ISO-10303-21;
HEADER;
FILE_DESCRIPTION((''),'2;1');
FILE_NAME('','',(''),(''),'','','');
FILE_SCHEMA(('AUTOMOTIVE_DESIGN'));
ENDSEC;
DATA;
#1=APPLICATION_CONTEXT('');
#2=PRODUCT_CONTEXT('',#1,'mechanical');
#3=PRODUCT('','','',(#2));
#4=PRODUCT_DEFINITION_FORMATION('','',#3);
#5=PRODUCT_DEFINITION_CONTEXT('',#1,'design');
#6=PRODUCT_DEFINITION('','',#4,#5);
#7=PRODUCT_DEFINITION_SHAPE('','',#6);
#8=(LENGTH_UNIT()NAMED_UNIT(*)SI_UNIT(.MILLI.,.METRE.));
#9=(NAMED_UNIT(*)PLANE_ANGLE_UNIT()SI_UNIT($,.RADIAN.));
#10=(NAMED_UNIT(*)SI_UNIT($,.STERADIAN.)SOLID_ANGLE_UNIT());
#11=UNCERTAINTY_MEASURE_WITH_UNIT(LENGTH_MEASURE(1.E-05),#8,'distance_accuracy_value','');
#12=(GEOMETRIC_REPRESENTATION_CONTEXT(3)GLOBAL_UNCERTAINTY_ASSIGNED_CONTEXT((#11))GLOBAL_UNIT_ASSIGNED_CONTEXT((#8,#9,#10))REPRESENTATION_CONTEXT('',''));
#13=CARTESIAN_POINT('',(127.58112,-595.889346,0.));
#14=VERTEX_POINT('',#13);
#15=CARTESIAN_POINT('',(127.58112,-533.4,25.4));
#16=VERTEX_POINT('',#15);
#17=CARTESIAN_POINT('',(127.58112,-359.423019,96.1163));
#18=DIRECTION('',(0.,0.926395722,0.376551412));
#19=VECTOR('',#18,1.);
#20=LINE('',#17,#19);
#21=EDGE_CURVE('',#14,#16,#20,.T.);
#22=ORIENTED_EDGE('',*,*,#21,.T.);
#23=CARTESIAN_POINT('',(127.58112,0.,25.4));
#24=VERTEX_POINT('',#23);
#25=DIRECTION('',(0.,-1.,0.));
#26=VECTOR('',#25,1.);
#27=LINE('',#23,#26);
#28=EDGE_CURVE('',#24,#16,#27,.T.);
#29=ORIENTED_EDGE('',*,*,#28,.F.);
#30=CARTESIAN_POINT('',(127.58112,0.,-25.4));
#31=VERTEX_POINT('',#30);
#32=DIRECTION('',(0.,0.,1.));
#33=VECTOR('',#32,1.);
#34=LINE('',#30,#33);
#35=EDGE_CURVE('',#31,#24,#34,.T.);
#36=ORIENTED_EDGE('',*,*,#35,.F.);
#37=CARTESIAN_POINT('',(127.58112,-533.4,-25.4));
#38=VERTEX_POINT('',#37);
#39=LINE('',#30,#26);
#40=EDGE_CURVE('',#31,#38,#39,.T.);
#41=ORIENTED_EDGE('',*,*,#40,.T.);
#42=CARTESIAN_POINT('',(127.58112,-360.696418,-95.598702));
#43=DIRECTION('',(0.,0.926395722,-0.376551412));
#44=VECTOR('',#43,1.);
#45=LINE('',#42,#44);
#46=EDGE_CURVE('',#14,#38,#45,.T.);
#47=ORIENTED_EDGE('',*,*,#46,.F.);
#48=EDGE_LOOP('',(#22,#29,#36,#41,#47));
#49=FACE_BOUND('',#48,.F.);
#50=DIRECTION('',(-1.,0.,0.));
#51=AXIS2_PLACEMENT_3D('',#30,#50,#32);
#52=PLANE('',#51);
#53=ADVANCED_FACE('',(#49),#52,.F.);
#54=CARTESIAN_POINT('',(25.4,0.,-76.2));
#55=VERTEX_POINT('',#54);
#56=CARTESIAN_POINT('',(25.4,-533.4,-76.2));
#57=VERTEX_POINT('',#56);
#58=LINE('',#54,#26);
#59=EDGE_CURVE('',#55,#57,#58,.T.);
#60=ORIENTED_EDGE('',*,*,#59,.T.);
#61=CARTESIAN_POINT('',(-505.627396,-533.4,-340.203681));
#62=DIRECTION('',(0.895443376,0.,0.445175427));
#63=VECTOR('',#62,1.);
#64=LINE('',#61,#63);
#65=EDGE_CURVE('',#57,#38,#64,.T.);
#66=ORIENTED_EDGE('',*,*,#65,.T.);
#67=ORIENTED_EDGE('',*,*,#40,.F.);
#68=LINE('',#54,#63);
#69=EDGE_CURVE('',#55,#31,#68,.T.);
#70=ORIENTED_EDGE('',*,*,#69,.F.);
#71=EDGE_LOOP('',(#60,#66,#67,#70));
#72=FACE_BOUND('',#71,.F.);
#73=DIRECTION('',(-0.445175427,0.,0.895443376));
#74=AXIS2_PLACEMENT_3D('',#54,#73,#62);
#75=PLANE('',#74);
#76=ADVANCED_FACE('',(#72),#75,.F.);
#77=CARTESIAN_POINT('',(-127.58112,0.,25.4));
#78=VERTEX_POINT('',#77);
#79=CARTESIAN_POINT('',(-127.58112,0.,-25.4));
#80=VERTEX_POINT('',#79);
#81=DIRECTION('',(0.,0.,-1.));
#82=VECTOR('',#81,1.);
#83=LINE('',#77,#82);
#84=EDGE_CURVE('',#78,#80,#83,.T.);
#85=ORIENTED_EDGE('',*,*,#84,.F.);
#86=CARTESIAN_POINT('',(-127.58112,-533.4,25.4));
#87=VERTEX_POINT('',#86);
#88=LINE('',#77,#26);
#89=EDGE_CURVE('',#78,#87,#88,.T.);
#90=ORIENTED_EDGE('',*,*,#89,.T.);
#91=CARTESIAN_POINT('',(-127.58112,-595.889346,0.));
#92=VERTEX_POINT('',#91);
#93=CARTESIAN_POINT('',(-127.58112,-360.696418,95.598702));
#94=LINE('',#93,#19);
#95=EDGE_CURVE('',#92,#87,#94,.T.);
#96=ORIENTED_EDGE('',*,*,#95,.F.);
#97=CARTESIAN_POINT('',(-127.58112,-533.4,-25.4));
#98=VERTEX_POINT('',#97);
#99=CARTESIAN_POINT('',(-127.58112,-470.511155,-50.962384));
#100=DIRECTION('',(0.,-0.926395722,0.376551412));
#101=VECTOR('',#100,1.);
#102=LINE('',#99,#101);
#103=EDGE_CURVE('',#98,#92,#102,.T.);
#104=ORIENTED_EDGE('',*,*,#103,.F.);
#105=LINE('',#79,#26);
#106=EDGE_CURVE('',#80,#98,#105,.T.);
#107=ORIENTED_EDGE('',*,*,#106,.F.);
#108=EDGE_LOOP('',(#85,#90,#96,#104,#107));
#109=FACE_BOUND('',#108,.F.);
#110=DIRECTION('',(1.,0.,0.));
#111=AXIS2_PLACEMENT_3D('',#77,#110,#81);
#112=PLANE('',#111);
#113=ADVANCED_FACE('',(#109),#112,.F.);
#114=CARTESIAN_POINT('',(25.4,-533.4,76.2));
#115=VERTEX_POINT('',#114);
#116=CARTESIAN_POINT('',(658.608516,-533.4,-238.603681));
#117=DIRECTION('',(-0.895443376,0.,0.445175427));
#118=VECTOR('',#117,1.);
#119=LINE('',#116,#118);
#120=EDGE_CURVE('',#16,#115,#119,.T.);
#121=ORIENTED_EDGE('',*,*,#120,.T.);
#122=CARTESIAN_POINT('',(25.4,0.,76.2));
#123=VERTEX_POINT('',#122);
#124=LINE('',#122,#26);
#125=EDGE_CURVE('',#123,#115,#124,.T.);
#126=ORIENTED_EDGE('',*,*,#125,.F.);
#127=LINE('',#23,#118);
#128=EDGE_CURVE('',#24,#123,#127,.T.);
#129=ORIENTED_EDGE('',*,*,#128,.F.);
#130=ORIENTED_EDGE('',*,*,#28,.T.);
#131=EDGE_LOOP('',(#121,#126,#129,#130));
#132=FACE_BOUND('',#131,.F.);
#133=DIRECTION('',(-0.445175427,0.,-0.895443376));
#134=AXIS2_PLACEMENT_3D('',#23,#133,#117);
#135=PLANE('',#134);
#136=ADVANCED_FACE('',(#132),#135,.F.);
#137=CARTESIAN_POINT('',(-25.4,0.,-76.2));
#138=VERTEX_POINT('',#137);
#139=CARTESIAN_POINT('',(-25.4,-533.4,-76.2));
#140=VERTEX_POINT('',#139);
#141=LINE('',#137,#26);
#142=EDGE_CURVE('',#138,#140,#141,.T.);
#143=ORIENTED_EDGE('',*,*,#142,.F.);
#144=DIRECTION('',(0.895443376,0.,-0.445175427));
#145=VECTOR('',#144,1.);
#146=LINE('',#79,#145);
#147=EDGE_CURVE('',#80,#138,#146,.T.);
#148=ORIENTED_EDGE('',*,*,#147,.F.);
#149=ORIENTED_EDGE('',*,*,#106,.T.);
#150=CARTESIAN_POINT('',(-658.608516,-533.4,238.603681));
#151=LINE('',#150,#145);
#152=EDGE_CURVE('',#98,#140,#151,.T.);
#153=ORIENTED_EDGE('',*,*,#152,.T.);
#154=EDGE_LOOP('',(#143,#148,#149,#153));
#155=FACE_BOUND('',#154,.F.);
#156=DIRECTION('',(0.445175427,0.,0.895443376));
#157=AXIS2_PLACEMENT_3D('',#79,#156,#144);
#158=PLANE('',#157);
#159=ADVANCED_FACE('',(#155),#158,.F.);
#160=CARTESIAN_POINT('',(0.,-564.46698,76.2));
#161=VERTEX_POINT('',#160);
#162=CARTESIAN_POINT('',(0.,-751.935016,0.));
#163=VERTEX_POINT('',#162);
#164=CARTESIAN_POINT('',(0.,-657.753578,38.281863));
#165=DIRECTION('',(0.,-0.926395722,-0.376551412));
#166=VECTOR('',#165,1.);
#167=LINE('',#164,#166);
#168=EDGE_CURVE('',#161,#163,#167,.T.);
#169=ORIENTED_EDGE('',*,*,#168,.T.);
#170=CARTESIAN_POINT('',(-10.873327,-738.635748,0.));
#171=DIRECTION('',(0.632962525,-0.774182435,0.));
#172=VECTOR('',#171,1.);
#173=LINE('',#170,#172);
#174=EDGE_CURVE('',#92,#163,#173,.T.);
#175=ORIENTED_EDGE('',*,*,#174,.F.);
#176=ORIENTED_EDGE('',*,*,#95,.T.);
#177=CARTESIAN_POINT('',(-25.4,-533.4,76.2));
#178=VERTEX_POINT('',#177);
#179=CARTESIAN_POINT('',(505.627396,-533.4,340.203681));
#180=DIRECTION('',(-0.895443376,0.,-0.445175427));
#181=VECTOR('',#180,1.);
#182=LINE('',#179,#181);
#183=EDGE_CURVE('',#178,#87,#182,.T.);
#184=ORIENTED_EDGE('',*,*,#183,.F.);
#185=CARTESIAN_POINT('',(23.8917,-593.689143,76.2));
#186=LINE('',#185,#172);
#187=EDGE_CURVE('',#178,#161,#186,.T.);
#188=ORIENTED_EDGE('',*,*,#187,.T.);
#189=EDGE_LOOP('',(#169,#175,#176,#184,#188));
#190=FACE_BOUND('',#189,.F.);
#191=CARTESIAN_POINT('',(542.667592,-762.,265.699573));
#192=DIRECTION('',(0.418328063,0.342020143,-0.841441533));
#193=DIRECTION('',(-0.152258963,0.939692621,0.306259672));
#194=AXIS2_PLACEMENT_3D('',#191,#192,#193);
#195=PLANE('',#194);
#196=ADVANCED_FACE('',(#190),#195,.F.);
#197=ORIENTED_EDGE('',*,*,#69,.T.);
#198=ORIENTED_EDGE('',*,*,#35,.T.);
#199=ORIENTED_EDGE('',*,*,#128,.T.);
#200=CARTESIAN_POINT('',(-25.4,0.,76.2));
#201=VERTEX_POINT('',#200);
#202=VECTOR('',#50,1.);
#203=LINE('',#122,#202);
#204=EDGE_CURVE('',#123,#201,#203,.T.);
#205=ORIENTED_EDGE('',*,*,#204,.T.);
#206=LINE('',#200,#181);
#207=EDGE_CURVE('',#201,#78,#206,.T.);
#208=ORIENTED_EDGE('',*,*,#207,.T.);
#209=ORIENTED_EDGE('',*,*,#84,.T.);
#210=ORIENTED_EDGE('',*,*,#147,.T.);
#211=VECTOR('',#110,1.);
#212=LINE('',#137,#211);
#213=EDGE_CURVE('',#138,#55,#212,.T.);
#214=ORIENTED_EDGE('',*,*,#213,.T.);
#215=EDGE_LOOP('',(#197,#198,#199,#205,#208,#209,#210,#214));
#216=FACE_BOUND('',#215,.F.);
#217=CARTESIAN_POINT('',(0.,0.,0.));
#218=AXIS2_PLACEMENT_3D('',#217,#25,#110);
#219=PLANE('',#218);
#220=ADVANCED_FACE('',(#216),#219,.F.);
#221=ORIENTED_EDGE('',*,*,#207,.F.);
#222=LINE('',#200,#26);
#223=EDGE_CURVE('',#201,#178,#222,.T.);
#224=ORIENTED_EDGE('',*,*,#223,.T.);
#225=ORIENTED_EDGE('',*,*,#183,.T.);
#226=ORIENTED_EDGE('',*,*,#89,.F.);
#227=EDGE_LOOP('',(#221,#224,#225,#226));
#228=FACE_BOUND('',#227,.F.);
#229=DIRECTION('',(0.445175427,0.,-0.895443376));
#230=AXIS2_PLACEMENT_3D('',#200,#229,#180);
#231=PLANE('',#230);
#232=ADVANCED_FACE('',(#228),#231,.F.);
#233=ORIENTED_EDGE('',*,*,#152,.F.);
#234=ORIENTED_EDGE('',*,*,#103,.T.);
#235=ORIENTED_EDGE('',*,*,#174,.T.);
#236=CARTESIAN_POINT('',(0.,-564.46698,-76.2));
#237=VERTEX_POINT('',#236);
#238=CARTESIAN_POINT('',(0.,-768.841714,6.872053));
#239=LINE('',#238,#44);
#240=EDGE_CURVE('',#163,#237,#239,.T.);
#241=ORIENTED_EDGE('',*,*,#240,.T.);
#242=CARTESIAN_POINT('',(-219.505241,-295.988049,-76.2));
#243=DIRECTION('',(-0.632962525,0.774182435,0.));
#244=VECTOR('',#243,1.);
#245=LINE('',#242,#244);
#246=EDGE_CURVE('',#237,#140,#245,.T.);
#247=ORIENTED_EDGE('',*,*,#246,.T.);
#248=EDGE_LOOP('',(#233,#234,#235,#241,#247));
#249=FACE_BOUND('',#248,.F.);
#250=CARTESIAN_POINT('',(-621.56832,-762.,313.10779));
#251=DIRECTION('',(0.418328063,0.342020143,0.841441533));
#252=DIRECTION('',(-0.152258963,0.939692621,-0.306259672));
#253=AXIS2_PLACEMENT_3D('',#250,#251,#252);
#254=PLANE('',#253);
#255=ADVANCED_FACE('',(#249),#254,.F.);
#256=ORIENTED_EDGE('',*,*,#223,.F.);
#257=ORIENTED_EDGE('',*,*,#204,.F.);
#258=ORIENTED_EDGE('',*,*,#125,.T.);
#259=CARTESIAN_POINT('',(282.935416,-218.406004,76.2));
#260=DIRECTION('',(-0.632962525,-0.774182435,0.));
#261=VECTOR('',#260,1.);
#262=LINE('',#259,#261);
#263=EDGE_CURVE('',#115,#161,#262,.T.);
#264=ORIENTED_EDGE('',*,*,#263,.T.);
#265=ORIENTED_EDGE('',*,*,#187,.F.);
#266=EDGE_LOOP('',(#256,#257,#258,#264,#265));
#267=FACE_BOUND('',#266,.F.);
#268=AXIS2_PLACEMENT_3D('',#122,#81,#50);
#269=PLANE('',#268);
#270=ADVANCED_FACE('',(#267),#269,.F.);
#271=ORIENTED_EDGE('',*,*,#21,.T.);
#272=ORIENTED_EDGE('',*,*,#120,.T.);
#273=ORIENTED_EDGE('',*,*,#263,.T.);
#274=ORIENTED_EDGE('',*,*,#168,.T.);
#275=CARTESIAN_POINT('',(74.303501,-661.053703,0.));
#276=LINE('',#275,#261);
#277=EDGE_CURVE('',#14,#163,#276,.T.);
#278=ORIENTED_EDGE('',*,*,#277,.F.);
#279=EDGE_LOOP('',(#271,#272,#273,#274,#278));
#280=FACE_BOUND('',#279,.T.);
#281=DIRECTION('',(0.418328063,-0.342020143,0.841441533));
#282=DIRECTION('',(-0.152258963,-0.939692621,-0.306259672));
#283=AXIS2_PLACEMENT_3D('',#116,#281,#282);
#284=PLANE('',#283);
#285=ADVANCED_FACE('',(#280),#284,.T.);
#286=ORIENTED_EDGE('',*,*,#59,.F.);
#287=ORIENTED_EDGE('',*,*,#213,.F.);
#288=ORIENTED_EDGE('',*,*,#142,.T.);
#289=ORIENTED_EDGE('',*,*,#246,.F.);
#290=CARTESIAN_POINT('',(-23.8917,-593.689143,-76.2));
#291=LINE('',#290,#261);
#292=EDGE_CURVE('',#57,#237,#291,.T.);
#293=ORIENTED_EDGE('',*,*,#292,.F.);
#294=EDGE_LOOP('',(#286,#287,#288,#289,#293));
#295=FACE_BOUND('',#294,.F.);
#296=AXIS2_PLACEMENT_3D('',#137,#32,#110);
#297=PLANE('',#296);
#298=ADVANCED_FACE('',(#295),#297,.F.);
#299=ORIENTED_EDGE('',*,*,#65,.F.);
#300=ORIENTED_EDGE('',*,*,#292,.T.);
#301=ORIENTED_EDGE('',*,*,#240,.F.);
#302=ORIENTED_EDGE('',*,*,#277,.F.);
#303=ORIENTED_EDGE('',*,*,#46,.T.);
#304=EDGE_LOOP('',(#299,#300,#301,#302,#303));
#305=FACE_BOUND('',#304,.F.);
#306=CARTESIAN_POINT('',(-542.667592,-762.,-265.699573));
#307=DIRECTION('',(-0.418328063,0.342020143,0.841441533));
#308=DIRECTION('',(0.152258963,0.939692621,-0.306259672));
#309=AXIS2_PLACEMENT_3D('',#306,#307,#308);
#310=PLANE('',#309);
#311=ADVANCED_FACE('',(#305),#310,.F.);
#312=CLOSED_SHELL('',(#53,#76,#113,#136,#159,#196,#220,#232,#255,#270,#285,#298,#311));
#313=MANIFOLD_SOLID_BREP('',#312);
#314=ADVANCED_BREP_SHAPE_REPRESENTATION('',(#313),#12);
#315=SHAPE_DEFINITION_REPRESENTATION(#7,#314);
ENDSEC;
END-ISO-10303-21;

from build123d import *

# Parameters (mm, degrees)
F1_DEPTH    = 762
F2_T1_DEPTH = 1300.1781500313
F2_T3_DEPTH = 1300.1781500313
F2_T5_DEPTH = 1300.1781500313
F2_T7_DEPTH = 1300.1781500313


# Not quite as in the source:
# - a fillet or chamfer that OpenCascade refuses, or shapes differently, is made with other operations: its cross-section is extruded or revolved along the edge and cut away or added


with BuildPart() as f1:
    # F0 (on Front) → F1 (new body)
    with BuildSketch(Plane.XZ):
        Polygon((25.4, 76.2), (0, 76.2), (-25.4, 76.2), (-127.5811195374, 25.4), (-127.5811195374, 0), (-127.5811195374, -25.4), (-25.4, -76.2), (0, -76.2), (25.4, -76.2), (127.5811195374, -25.4), (127.5811195374, 0), (127.5811195374, 25.4), align=None)
    extrude(amount=F1_DEPTH)

    # F2: chamfer of 228.6 x 83.2035955533 on 4 edges, made by hand

    # F2_s2 → F2_t1 (cut)
    with BuildSketch(Plane(origin=(541.036756959, 0, 268.9798993978), x_dir=(0, 1, 0), z_dir=(-0.8954433759, 0, -0.4451754267))):
        Polygon((-762, 3.6633544712), (-533.4, -79.540241082), (-762, -79.540241082), align=None)
    extrude(amount=F2_T1_DEPTH, mode=Mode.SUBTRACT)

    # F2_s4 → F2_t3 (cut)
    with BuildSketch(Plane(origin=(623.1991549624, 0, -309.8274633849), x_dir=(0, 1, 0), z_dir=(-0.8954433759, 0, 0.4451754267))):
        Polygon((-533.4, -79.540241082), (-762, 3.6633544712), (-762, -79.540241082), align=None)
    extrude(amount=F2_T3_DEPTH, mode=Mode.SUBTRACT)

    # F2_s6 → F2_t5 (cut)
    with BuildSketch(Plane(origin=(-541.036756959, 0, -268.9798993978), x_dir=(0, 1, 0), z_dir=(0.8954433759, 0, 0.4451754267))):
        Polygon((-762, 3.6633544712), (-533.4, -79.540241082), (-762, -79.540241082), align=None)
    extrude(amount=F2_T5_DEPTH, mode=Mode.SUBTRACT)

    # F2_s8 → F2_t7 (cut)
    with BuildSketch(Plane(origin=(-623.1991549624, 0, 309.8274633849), x_dir=(0, 1, 0), z_dir=(0.8954433759, 0, -0.4451754267))):
        Polygon((-762, 3.6633544712), (-533.4, -79.540241082), (-762, -79.540241082), align=None)
    extrude(amount=F2_T7_DEPTH, mode=Mode.SUBTRACT)


solid = f1.part
